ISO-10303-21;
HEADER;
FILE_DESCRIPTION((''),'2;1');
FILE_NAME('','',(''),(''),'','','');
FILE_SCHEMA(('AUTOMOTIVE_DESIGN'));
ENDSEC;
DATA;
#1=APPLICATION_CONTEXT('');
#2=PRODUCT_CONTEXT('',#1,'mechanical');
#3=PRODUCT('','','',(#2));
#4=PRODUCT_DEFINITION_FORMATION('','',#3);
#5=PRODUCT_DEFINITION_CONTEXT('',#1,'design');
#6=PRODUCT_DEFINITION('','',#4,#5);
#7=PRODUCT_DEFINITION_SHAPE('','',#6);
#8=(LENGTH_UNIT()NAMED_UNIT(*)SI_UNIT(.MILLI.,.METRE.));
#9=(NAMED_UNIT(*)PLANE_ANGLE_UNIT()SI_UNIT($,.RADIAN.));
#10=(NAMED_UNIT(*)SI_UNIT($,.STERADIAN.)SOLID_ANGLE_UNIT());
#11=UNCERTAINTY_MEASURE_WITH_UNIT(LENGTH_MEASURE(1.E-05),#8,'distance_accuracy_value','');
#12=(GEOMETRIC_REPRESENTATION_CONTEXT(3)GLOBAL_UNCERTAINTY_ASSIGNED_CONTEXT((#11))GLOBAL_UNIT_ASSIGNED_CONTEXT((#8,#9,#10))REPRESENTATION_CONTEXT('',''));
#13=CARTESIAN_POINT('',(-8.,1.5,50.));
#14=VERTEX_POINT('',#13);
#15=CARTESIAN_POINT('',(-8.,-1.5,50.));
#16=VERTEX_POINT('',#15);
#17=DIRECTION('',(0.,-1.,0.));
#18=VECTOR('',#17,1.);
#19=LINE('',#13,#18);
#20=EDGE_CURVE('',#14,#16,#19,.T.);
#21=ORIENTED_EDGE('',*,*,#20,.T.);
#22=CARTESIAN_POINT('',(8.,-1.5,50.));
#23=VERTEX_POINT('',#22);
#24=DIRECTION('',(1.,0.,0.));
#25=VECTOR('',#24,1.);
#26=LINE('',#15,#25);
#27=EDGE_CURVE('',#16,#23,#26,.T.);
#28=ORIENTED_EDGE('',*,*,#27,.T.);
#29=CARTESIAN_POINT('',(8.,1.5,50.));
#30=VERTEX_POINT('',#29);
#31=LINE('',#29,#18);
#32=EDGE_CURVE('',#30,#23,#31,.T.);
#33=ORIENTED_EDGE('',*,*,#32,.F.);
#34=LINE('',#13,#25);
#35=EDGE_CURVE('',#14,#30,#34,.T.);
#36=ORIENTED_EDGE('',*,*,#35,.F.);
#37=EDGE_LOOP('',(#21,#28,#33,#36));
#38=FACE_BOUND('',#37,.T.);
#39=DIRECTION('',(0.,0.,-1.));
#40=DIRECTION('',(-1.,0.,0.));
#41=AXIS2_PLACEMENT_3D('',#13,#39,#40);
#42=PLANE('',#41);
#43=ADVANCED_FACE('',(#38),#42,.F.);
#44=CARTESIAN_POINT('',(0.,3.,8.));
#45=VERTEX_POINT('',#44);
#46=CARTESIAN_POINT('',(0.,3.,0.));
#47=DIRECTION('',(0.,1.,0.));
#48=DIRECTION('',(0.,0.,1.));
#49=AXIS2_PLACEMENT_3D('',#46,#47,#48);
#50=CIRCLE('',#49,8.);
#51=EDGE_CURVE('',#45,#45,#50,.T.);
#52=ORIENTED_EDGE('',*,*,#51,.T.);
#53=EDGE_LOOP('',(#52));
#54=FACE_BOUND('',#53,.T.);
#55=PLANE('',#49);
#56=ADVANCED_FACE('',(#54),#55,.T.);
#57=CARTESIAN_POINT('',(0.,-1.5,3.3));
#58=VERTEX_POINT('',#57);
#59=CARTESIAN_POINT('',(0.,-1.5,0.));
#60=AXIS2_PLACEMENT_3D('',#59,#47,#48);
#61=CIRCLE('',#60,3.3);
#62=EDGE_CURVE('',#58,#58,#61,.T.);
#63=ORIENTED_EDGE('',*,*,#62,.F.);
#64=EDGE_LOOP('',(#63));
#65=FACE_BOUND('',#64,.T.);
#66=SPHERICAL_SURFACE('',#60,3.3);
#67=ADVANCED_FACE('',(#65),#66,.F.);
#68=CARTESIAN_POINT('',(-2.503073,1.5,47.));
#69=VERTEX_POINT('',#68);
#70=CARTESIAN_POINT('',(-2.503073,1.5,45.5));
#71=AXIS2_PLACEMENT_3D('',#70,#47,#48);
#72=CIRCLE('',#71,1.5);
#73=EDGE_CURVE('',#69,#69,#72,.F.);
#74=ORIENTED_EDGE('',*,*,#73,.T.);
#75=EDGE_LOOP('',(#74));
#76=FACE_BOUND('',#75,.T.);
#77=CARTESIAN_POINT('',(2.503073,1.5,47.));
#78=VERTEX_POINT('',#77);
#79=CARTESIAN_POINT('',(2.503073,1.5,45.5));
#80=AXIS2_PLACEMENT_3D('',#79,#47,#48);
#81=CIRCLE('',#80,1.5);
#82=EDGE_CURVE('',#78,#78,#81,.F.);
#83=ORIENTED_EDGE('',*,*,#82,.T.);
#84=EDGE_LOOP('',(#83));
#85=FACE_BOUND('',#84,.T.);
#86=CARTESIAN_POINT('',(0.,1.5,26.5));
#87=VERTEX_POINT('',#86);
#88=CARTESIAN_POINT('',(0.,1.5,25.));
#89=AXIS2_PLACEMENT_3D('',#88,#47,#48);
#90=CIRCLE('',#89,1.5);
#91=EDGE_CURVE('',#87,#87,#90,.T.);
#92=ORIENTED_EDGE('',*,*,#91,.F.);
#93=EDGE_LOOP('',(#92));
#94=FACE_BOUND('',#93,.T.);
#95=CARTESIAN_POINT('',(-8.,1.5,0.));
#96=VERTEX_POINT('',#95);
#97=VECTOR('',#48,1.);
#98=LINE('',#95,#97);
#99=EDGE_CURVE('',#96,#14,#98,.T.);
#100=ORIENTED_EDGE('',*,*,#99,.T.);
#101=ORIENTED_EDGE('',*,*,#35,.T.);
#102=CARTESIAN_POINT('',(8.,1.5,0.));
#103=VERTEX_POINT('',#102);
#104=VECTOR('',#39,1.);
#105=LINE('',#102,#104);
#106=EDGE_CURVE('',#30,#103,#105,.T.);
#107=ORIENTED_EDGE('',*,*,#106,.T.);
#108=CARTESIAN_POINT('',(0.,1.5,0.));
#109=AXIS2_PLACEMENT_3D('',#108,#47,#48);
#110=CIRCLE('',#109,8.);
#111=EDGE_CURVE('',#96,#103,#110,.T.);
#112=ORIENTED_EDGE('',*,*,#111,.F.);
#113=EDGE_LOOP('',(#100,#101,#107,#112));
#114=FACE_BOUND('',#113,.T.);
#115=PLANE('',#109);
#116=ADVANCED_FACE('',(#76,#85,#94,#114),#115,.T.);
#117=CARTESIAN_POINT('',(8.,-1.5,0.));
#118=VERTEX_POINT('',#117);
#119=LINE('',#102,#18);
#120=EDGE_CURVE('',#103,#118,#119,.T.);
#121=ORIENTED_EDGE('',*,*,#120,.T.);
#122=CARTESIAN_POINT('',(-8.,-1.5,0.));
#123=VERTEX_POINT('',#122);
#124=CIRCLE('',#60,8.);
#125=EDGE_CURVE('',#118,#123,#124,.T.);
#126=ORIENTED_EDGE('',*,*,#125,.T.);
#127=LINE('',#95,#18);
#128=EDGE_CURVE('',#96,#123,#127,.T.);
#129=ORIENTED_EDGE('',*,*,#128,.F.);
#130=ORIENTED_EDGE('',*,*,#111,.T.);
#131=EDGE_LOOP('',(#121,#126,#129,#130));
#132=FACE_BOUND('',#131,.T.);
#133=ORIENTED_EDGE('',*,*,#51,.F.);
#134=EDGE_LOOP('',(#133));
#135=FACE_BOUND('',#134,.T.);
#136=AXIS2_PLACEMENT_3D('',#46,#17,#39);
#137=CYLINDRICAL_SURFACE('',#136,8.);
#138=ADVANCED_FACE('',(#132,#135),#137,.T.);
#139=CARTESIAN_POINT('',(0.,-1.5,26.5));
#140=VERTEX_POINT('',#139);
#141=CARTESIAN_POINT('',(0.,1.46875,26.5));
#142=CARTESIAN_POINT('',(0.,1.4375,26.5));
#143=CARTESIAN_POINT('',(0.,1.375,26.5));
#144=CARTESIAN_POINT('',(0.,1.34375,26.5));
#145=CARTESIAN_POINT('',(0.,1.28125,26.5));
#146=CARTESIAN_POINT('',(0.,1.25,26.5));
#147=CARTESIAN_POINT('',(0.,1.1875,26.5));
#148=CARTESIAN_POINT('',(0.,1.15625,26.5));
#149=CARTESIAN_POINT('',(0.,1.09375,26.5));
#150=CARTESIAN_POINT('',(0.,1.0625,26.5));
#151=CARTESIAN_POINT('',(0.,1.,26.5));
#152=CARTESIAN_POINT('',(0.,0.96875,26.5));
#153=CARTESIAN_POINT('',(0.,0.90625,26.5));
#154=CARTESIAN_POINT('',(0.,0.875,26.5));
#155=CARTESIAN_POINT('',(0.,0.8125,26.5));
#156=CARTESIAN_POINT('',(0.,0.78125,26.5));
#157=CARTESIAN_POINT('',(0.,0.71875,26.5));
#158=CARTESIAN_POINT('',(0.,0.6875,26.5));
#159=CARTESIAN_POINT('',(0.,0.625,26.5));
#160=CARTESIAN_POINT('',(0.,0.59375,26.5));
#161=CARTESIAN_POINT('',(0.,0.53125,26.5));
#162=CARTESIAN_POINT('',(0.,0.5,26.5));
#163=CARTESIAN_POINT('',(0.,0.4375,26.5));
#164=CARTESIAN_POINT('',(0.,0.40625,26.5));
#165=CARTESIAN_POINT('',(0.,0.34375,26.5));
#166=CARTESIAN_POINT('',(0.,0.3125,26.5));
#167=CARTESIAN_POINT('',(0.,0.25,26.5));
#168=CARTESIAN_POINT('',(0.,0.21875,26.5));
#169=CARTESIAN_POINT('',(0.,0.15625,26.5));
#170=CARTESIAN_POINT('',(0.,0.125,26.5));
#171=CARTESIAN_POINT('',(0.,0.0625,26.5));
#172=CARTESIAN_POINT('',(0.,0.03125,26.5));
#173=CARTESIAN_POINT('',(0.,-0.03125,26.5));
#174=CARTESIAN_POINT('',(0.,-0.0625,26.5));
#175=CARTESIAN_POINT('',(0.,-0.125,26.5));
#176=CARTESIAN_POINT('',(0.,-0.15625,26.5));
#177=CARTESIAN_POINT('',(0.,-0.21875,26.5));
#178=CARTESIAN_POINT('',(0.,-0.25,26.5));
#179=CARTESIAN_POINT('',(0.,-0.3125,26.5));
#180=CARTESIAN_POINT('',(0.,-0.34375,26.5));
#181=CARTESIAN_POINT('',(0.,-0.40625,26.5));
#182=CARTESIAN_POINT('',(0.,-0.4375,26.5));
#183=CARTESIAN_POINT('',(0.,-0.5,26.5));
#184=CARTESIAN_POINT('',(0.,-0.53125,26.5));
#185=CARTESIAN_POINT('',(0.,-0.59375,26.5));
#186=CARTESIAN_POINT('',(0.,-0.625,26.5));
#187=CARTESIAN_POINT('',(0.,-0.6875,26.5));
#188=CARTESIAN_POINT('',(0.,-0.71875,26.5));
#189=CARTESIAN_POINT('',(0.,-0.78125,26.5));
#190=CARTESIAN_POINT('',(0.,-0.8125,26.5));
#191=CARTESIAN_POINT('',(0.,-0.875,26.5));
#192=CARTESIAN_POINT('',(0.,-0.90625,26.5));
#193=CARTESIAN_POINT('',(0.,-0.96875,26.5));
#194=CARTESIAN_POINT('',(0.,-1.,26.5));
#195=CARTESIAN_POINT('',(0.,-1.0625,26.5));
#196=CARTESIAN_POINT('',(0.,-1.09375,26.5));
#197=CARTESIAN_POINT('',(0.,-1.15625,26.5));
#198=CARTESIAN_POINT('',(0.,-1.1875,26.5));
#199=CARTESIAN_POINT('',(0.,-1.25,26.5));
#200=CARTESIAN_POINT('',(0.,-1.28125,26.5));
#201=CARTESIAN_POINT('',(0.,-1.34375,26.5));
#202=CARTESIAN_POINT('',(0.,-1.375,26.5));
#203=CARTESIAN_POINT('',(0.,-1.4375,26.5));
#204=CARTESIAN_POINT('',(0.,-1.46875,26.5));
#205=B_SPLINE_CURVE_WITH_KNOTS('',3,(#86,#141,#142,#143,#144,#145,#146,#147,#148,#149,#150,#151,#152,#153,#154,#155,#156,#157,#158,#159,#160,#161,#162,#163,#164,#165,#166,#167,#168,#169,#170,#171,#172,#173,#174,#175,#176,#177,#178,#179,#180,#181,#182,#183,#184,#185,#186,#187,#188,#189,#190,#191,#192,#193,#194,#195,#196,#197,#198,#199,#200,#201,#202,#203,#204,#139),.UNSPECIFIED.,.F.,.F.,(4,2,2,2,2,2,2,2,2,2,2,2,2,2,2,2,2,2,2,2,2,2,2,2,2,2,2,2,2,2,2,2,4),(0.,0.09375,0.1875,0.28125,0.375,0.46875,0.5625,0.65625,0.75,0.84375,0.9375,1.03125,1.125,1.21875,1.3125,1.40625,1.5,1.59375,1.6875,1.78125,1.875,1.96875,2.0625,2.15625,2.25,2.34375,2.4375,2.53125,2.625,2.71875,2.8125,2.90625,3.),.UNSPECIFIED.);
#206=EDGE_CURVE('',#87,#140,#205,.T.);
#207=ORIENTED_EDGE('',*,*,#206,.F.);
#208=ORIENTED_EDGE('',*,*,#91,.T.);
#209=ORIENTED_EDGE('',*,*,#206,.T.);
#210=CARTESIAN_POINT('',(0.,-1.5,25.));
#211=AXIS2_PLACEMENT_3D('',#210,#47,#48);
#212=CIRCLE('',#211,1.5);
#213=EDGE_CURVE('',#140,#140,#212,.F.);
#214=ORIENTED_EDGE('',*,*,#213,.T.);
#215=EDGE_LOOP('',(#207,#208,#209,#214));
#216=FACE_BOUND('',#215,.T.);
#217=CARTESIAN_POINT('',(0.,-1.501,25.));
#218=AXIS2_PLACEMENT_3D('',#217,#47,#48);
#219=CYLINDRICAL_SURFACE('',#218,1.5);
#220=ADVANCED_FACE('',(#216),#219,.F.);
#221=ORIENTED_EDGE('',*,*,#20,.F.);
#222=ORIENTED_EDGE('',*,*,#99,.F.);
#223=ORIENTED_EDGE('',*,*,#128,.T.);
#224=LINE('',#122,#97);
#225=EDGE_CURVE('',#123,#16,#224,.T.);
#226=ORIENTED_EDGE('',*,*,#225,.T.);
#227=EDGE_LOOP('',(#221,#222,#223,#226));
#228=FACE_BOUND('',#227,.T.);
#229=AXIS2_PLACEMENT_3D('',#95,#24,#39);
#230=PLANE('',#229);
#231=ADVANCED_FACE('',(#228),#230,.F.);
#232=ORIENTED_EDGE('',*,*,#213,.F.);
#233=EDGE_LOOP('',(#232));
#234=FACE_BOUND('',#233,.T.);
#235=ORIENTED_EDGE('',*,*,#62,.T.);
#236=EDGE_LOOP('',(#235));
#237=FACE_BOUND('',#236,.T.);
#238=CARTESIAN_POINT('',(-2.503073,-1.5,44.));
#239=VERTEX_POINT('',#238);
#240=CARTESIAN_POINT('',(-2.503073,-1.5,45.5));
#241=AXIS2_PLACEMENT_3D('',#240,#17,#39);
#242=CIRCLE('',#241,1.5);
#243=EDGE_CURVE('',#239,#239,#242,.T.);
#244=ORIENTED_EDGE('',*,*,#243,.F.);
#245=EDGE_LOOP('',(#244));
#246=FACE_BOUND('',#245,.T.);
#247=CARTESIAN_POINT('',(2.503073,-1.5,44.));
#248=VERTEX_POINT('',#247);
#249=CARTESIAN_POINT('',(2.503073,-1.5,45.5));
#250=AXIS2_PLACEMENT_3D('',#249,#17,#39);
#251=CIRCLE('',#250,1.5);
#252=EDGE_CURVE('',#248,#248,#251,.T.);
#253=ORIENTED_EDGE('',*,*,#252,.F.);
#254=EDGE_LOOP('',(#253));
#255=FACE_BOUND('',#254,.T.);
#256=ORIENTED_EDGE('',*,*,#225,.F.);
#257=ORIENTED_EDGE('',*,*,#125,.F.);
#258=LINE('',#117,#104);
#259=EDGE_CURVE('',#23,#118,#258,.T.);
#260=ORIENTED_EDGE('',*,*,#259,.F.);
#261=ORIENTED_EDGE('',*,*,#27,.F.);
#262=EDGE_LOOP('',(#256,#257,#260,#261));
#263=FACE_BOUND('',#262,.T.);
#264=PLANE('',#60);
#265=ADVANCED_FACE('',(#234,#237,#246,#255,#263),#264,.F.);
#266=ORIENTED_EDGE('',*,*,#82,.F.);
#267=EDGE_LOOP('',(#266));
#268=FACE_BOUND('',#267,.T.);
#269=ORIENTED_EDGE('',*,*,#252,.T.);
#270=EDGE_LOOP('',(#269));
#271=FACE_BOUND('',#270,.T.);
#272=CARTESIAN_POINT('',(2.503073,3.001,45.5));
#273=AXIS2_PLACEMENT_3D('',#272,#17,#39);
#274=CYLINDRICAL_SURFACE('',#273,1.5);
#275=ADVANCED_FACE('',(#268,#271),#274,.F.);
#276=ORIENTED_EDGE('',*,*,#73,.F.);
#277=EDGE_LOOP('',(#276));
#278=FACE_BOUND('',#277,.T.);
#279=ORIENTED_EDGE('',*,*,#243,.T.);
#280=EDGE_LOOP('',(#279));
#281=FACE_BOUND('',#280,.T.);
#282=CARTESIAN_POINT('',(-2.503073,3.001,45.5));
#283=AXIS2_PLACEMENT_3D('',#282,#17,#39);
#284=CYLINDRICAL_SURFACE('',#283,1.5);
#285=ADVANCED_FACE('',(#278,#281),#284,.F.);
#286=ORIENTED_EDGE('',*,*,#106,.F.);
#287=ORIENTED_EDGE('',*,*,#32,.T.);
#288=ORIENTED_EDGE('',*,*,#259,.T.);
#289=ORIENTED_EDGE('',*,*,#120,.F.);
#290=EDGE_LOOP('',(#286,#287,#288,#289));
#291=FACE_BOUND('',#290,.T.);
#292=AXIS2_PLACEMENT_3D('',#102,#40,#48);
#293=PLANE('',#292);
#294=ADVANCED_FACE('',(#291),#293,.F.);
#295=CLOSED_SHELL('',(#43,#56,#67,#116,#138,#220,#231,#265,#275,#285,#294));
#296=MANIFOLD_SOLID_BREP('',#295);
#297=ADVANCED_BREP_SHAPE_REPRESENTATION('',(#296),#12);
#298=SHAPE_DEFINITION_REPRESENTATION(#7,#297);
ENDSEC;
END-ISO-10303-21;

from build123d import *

# Parameters (mm, degrees)
BOSS_EXTRUDE1_DEPTH      = 3
BOSS_EXTRUDE1_DEPTH_BACK = 1.5
SKETCH1_R                = 8
SKETCH2_W                = 16
SKETCH2_H                = 50
BOSS_EXTRUDE2_DEPTH      = 1.5
CUT_EXTRUDE1_REACH       = 52.836
SKETCH3_R                = 1.5
CUT_EXTRUDE3_REACH       = 52.725
SKETCH5_R                = 1.5


with BuildPart() as part:
    # Sketch1 → Boss-Extrude1 (new, two sides: drawn at the far end of the back side and taken through both)
    with BuildSketch(Plane(origin=(0, 0, 0), x_dir=(1, 0, 0), z_dir=(0, 1, 0)).offset(-BOSS_EXTRUDE1_DEPTH_BACK)):
        Circle(SKETCH1_R)
    extrude(amount=BOSS_EXTRUDE1_DEPTH + BOSS_EXTRUDE1_DEPTH_BACK)

    # Sketch2 → Boss-Extrude2 (add, symmetric)
    with BuildSketch(Plane(origin=(0, 0, 0), x_dir=(1, 0, 0), z_dir=(0, 1, 0))):
        with Locations((0, -25)):
            Rectangle(SKETCH2_W, SKETCH2_H)
    extrude(amount=BOSS_EXTRUDE2_DEPTH, both=True)

    # Sketch3 → Cut-Extrude1 (cut, up to next)
    with BuildSketch(Plane(origin=(0, -1.5, 0), x_dir=(-1, 0, 0), z_dir=(0, -1, 0)), mode=Mode.PRIVATE) as cut_extrude1_sk1:
        with Locations((2.503073418, -45.5)):
            Circle(SKETCH3_R)
    cut_extrude1_tool1 = extrude(cut_extrude1_sk1.sketch, amount=-CUT_EXTRUDE1_REACH, mode=Mode.PRIVATE) & part.part
    # Sketch3 → Cut-Extrude1 (cut, up to next)
    with BuildSketch(Plane(origin=(0, -1.5, 0), x_dir=(-1, 0, 0), z_dir=(0, -1, 0)), mode=Mode.PRIVATE) as cut_extrude1_sk2:
        with Locations((-2.503073418, -45.5)):
            Circle(SKETCH3_R)
    cut_extrude1_tool2 = extrude(cut_extrude1_sk2.sketch, amount=-CUT_EXTRUDE1_REACH, mode=Mode.PRIVATE) & part.part
    add(cut_extrude1_tool1.solids().sort_by_distance((-2.503073, -1.5, 45.5))[0], mode=Mode.SUBTRACT)
    add(cut_extrude1_tool2.solids().sort_by_distance((2.503073, -1.5, 45.5))[0], mode=Mode.SUBTRACT)

    # Sketch4 → Cut-Revolve21 (revolve, cut)
    with BuildSketch(Plane(origin=(0, -1.5, 0), x_dir=(-1, 0, 0), z_dir=(0, -1, 0))):
        with BuildLine():
            Line((3.3, 0), (-3.3, 0))
            ThreePointArc((-3.3, 0), (0, -3.3), (3.3, 0))
        make_face()
    revolve(axis=Axis((3.3, -1.5, 0), (-1, 0, 0)), mode=Mode.SUBTRACT)

    # Sketch5 → Cut-Extrude3 (cut, up to next)
    with BuildSketch(Plane(origin=(0, 1.5, 0), x_dir=(1, 0, 0), z_dir=(0, 1, 0)), mode=Mode.PRIVATE) as cut_extrude3_sk1:
        with Locations((0, -25)):
            Circle(SKETCH5_R)
    cut_extrude3_tool1 = extrude(cut_extrude3_sk1.sketch, amount=-CUT_EXTRUDE3_REACH, mode=Mode.PRIVATE) & part.part
    add(cut_extrude3_tool1.solids().sort_by_distance((0, 1.5, 25))[0], mode=Mode.SUBTRACT)


solid = part.part
